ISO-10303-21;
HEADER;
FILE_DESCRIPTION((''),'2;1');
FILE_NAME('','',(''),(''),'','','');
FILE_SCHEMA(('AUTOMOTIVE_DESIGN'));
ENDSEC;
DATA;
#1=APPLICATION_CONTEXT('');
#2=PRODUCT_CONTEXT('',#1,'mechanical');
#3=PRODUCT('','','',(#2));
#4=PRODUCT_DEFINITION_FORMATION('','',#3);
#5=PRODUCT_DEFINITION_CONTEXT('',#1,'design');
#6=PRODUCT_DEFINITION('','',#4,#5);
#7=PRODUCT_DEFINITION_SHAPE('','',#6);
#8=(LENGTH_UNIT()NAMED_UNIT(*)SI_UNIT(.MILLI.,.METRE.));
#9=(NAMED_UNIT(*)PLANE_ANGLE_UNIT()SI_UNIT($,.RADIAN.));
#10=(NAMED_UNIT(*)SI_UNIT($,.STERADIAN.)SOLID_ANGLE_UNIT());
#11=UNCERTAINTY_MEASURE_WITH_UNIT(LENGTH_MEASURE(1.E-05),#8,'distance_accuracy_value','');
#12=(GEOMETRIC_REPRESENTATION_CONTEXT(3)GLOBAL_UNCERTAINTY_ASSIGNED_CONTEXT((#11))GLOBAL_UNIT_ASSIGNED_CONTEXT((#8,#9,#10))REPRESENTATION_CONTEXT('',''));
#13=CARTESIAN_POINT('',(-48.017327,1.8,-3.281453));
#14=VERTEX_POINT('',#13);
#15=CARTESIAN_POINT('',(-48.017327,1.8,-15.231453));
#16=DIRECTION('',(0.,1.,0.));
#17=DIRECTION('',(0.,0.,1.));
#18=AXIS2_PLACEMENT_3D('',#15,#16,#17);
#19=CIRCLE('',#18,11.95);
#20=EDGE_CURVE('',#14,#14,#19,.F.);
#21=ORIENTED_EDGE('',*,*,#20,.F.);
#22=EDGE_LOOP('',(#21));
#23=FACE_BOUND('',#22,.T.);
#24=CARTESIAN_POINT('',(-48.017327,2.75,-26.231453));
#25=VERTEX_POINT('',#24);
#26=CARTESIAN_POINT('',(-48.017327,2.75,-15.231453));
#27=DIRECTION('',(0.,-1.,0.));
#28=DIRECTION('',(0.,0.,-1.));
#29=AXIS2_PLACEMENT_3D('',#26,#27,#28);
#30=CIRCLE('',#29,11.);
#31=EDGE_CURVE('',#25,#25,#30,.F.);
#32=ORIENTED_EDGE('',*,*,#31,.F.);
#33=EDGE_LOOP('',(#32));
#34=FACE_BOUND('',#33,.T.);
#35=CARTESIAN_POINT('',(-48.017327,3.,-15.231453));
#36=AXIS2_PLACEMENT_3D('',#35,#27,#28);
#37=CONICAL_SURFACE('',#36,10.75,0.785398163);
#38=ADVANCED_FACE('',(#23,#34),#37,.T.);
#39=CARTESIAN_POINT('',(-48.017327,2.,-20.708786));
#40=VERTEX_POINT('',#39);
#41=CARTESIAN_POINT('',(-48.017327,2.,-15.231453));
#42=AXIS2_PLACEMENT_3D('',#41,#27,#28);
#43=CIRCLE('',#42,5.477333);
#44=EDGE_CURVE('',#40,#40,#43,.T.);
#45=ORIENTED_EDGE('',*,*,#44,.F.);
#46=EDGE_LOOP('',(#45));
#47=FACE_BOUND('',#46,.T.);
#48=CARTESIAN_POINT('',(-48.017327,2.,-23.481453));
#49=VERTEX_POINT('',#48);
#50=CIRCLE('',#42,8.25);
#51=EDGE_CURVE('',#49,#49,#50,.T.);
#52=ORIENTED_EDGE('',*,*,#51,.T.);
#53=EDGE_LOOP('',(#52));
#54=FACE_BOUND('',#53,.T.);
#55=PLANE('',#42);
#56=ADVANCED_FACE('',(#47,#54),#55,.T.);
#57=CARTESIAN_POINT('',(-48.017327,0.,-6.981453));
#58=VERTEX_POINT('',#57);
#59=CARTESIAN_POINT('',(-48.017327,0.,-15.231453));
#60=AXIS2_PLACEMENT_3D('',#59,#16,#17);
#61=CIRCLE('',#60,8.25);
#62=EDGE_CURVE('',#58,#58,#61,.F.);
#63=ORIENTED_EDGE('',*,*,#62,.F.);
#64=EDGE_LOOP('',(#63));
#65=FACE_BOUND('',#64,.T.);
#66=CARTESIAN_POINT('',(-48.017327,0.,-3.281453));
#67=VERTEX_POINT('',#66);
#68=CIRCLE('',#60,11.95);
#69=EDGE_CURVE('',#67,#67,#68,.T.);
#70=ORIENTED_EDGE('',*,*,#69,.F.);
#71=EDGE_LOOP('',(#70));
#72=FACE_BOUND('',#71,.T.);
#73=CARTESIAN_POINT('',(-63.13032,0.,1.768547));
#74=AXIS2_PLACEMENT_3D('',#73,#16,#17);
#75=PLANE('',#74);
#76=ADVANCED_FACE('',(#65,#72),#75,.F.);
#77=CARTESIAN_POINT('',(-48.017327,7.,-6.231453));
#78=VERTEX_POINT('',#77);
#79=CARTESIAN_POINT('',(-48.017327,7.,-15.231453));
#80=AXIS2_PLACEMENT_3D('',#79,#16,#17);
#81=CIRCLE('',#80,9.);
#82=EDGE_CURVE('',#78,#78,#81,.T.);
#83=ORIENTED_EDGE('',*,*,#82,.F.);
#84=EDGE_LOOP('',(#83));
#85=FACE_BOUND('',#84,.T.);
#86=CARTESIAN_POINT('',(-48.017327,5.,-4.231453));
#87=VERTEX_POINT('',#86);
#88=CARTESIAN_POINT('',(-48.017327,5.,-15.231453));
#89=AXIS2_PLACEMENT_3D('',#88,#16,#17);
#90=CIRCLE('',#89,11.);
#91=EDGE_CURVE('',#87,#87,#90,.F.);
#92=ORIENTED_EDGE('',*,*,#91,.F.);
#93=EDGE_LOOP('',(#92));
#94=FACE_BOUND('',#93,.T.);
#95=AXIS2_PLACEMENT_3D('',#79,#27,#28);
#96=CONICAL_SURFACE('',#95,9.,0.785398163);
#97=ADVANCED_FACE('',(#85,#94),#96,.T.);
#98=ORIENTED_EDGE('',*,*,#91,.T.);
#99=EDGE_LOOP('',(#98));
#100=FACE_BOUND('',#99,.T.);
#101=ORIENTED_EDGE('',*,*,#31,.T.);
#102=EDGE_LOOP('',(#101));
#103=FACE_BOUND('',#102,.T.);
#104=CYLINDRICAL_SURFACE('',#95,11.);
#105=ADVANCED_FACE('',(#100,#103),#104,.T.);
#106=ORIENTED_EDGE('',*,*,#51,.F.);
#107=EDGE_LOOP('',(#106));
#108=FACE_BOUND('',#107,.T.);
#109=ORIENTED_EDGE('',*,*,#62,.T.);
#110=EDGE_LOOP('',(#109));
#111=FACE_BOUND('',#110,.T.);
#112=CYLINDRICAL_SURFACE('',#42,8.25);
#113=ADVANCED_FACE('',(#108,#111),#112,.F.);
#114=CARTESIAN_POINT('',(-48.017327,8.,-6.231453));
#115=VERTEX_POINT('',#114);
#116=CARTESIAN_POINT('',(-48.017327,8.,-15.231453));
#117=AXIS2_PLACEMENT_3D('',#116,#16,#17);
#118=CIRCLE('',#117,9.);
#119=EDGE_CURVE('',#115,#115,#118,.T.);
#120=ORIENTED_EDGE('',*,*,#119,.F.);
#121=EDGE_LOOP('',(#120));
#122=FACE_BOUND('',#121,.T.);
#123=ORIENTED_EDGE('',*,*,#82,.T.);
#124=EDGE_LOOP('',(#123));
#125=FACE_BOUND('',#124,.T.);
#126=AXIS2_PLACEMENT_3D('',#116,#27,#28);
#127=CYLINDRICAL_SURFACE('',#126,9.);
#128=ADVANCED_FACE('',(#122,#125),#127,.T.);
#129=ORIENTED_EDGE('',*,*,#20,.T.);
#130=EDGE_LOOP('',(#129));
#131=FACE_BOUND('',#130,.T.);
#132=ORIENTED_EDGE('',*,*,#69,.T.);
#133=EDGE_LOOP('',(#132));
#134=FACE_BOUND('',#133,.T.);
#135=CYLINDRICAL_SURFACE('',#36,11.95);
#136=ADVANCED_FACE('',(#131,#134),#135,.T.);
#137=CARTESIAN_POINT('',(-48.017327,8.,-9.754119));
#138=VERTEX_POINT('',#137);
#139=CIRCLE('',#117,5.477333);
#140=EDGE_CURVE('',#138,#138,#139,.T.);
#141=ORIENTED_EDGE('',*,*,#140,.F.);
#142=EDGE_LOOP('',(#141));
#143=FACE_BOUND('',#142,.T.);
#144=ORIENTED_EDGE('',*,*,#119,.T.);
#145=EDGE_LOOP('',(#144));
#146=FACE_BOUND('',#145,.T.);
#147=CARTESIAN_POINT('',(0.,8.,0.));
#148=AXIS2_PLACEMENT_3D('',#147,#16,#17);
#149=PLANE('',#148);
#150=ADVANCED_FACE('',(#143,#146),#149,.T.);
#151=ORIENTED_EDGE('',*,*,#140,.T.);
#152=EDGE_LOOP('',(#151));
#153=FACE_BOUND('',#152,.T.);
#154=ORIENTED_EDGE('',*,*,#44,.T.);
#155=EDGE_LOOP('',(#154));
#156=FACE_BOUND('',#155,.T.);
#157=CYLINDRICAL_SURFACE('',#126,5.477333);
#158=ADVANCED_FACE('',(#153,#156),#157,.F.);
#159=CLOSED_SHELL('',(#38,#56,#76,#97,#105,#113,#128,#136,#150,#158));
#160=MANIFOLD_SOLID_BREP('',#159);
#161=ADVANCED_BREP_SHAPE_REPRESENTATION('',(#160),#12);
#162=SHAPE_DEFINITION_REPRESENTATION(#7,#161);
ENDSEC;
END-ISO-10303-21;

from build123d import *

# Parameters (mm, degrees)
SZKIC1_R                    = 9
SZKIC1_R_2                  = 5.477333333
DODANIE_WYCI_GNI_CIE1_DEPTH = 8
SZKIC1_3_R                  = 11
SZKIC1_3_R_2                = 9
DODANIE_WYCI_GNI_CIE2_DEPTH = 7
SZKIC1_4_R                  = 11.95
SZKIC1_4_R_2                = 11
DODANIE_WYCI_GNI_CIE3_DEPTH = 3
DODANIE_WYCI_GNI_CIE4_START = -3
SZKIC1_5_R                  = 11.95
SZKIC1_5_R_2                = 1.65
SZKIC1_5_R_3                = 11
SZKIC1_5_R_4                = 9
SZKIC1_5_R_5                = 5.477333333
DODANIE_WYCI_GNI_CIE4_DEPTH = 3
SZKIC2_R                    = 8.25
WYTNIJ_WYCI_GNI_CIE1_DEPTH  = 5
SFAZOWANIE1_SIZE            = 1.2
DODANIE_WYCI_GNI_CIE5_START = 17
SZKIC3_R                    = 1.65
DODANIE_WYCI_GNI_CIE5_DEPTH = 17
ZAOKR_GLENIE1_R             = 10
ZAOKR_GLENIE2_R             = 4
SFAZOWANIE2_SIZE            = 2
WYTNIJ_WYCI_GNI_CIE3_DEPTH  = 81.474279011


# Some blends are built 0.0001 mm under size
with BuildPart() as part:
    # Szkic1 → Dodanie-wyciągnięcie1 (new body)
    with BuildSketch(Plane(origin=(0, 0, 0), x_dir=(1, 0, 0), z_dir=(0, 1, 0))):
        with Locations(Location((-48.017326928, 15.231452718, 0), (0, 0, 270))):
            Circle(SZKIC1_R)
        with Locations(Location((-48.017326928, 15.231452718, 0), (0, 0, 270))):
            Circle(SZKIC1_R_2, mode=Mode.SUBTRACT)
    extrude(amount=DODANIE_WYCI_GNI_CIE1_DEPTH)

    # Szkic1<3> → Dodanie-wyciągnięcie2 (add)
    with BuildSketch(Plane(origin=(0, 0, 0), x_dir=(1, 0, 0), z_dir=(0, 1, 0))):
        with Locations(Location((-48.017326928, 15.231452718, 0), (0, 0, 270))):
            Circle(SZKIC1_3_R)
        with Locations(Location((-48.017326928, 15.231452718, 0), (0, 0, 270))):
            Circle(SZKIC1_3_R_2, mode=Mode.SUBTRACT)
    extrude(amount=DODANIE_WYCI_GNI_CIE2_DEPTH)

    # Szkic1<4> → Dodanie-wyciągnięcie3 (add)
    with BuildSketch(Plane(origin=(0, 0, 0), x_dir=(1, 0, 0), z_dir=(0, 1, 0))):
        with Locations(Location((-48.017326928, 15.231452718, 0), (0, 0, 270))):
            Circle(SZKIC1_4_R)
        with Locations(Location((-48.017326928, 15.231452718, 0), (0, 0, 270))):
            Circle(SZKIC1_4_R_2, mode=Mode.SUBTRACT)
    extrude(amount=DODANIE_WYCI_GNI_CIE3_DEPTH)

    # Szkic1<5> → Dodanie-wyciągnięcie4 (add)
    # profile 1 of 4: a face of its own
    with BuildSketch(Plane(origin=(0, 0, 0), x_dir=(1, 0, 0), z_dir=(0, 1, 0)).offset(DODANIE_WYCI_GNI_CIE4_START)):
        with BuildLine():
            Line((-69.017326928, 26.22592553), (-69.017326928, 4.236979905))
            ThreePointArc((-69.017326928, 4.236979905), (-67.978820752, -1.151729035), (-65.012060165, -5.768547282))
            Line((-65.012060165, -5.768547282), (-50.017326928, -5.768547282))
            Line((-50.017326928, -5.768547282), (-30.833560744, -5.768547282))
            Line((-30.833560744, -5.768547282), (-26.817326928, -1.752313466))
            Line((-26.817326928, -1.752313466), (-26.817326928, 32.215218902))
            Line((-26.817326928, 32.215218902), (-30.833560744, 36.231452718))
            Line((-30.833560744, 36.231452718), (-50.017326928, 36.231452718))
            Line((-50.017326928, 36.231452718), (-65.012060165, 36.231452718))
            ThreePointArc((-65.012060165, 36.231452718), (-67.978820752, 31.61463447), (-69.017326928, 26.22592553))
        make_face()
        with Locations(Location((-48.017326928, 15.231452718, 0), (0, 0, 270))):
            Circle(SZKIC1_5_R, mode=Mode.SUBTRACT)
        with Locations(Location((-63.517326928, -0.268547282, 0), (0, 0, 270))):
            Circle(SZKIC1_5_R_2, mode=Mode.SUBTRACT)
        with Locations(Location((-32.517326928, -0.268547282, 0), (0, 0, 270))):
            Circle(SZKIC1_5_R_2, mode=Mode.SUBTRACT)
        with Locations(Location((-32.517326928, 30.731452718, 0), (0, 0, 270))):
            Circle(SZKIC1_5_R_2, mode=Mode.SUBTRACT)
        with Locations(Location((-63.517326928, 30.731452718, 0), (0, 0, 270))):
            Circle(SZKIC1_5_R_2, mode=Mode.SUBTRACT)
    # profile 2 of 4: a face of its own
    with BuildSketch(Plane(origin=(0, 0, 0), x_dir=(1, 0, 0), z_dir=(0, 1, 0)).offset(DODANIE_WYCI_GNI_CIE4_START)):
        with Locations(Location((-48.017326928, 15.231452718, 0), (0, 0, 270))):
            Circle(SZKIC1_5_R)
        with Locations(Location((-48.017326928, 15.231452718, 0), (0, 0, 270))):
            Circle(SZKIC1_5_R_3, mode=Mode.SUBTRACT)
    # profile 3 of 4: a face of its own
    with BuildSketch(Plane(origin=(0, 0, 0), x_dir=(1, 0, 0), z_dir=(0, 1, 0)).offset(DODANIE_WYCI_GNI_CIE4_START)):
        with Locations(Location((-48.017326928, 15.231452718, 0), (0, 0, 270))):
            Circle(SZKIC1_5_R_3)
        with Locations(Location((-48.017326928, 15.231452718, 0), (0, 0, 270))):
            Circle(SZKIC1_5_R_4, mode=Mode.SUBTRACT)
    # profile 4 of 4: a face of its own
    with BuildSketch(Plane(origin=(0, 0, 0), x_dir=(1, 0, 0), z_dir=(0, 1, 0)).offset(DODANIE_WYCI_GNI_CIE4_START)):
        with Locations(Location((-48.017326928, 15.231452718, 0), (0, 0, 270))):
            Circle(SZKIC1_5_R_4)
        with Locations(Location((-48.017326928, 15.231452718, 0), (0, 0, 270))):
            Circle(SZKIC1_5_R_5, mode=Mode.SUBTRACT)
    extrude(amount=DODANIE_WYCI_GNI_CIE4_DEPTH)

    # Szkic2 → Wytnij-wyciągnięcie1 (cut)
    with BuildSketch(Plane.XZ.offset(3)):
        with Locations(Location((-48.017326928, -15.231452718, 0), (0, 0, 270))):
            Circle(SZKIC2_R)
    extrude(amount=-WYTNIJ_WYCI_GNI_CIE1_DEPTH, mode=Mode.SUBTRACT)

    # Sfazowanie1
    # the kernel refuses this chamfer: 1.2 mm, written as the material it takes off along each edge
    with BuildSketch(Plane(origin=(-48.017326928, 3, -15.231452718), x_dir=(0, 0, 1), z_dir=(-1, 0, 0))) as sfazowanie1_piece_1_section:
        Polygon((11.95 - SFAZOWANIE1_SIZE, 0), (11.95, -SFAZOWANIE1_SIZE), (11.95, 0), align=None)
    sfazowanie1_piece_1 = revolve(axis=Axis((-48.017326928, 3, -15.231452718), (0, 1, 0)), mode=Mode.PRIVATE)
    sfazowanie1_piece_1 = sfazowanie1_piece_1 - Plane(origin=(-48.017326928, 2.284838346, -15.231452718), x_dir=(0, 0, 1), z_dir=(0, -1, 0)) * Cylinder(11, 48, mode=Mode.PRIVATE)
    add(sfazowanie1_piece_1, mode=Mode.SUBTRACT)

    # Szkic3 → Dodanie-wyciągnięcie5 (add)
    with BuildSketch(Plane.XZ.offset(3).offset(DODANIE_WYCI_GNI_CIE5_START)):
        with BuildLine():
            Line((-69.017326928, -26.22592553), (-36.817326928, -26.22592553))
            Line((-36.817326928, -26.22592553), (-36.817326928, -4.236979905))
            Line((-36.817326928, -4.236979905), (-69.017326928, -4.236979905))
            ThreePointArc((-69.017326928, -4.236979905), (-67.978820752, 1.151729035), (-65.012060165, 5.768547282))
            Line((-65.012060165, 5.768547282), (-30.833560744, 5.768547282))
            Line((-30.833560744, 5.768547282), (-26.817326928, 1.752313466))
            Line((-26.817326928, 1.752313466), (-26.817326928, -32.215218902))
            Line((-26.817326928, -32.215218902), (-30.833560744, -36.231452718))
            Line((-30.833560744, -36.231452718), (-65.012060165, -36.231452718))
            ThreePointArc((-65.012060165, -36.231452718), (-67.978820752, -31.61463447), (-69.017326928, -26.22592553))
        make_face()
        with Locations(Location((-63.517326928, 0.268547282, 0), (0, 0, 90))):
            Circle(SZKIC3_R, mode=Mode.SUBTRACT)
        with Locations(Location((-32.517326928, 0.268547282, 0), (0, 0, 90))):
            Circle(SZKIC3_R, mode=Mode.SUBTRACT)
        with Locations(Location((-32.517326928, -30.731452718, 0), (0, 0, 90))):
            Circle(SZKIC3_R, mode=Mode.SUBTRACT)
        with Locations(Location((-63.517326928, -30.731452718, 0), (0, 0, 90))):
            Circle(SZKIC3_R, mode=Mode.SUBTRACT)
    extrude(amount=-DODANIE_WYCI_GNI_CIE5_DEPTH)

    # Zaokrąglenie1
    zaokr_glenie1_edges = [part.edges().sort_by_distance(p)[0] for p in [
        (-36.817326928, -11.5, -4.236979905),
        (-36.817326928, -11.5, -26.22592553),
    ]]
    fillet(zaokr_glenie1_edges, radius=ZAOKR_GLENIE1_R)

    # Zaokrąglenie2
    zaokr_glenie2_edges = [part.edges().sort_by_distance(p)[0] for p in [
        (-65.012060165, -10, -36.231452718),
        (-30.833560744, -10, -36.231452718),
        (-26.817326928, -10, -32.215218902),
        (-26.817326928, -10, 1.752313466),
        (-30.833560744, -10, 5.768547282),
        (-65.012060165, -10, 5.768547282),
        (-69.017326928, -11.5, -26.22592553),
        (-69.017326928, -11.5, -4.236979905),
    ]]
    fillet(zaokr_glenie2_edges, radius=ZAOKR_GLENIE2_R)

    # Sfazowanie2
    sfazowanie2_edges = [part.edges().sort_by_distance(p)[0] for p in [
        (-48.017326928, 7, -26.231452718),
    ]]
    chamfer(sfazowanie2_edges, length=SFAZOWANIE2_SIZE - 0.0001)  # a hair under: the kernel refuses the full size

    # Szkic5 → Wytnij-wyciągnięcie3 (cut, through all)
    with BuildSketch(Plane(origin=(0, 0, 0), x_dir=(1, 0, 0), z_dir=(0, 1, 0))):
        with BuildLine():
            Line((-63.130319625, -5.768547282), (-32.490414994, -5.768547282))
            ThreePointArc((-32.490414994, -5.768547282), (-30.959681264, -5.464065412), (-29.661987869, -4.596974407))
            Line((-29.661987869, -4.596974407), (-27.988899803, -2.923886342))
            ThreePointArc((-27.988899803, -2.923886342), (-27.121808798, -1.626192946), (-26.817326928, -0.095459217))
            Line((-26.817326928, -0.095459217), (-26.817326928, 30.558364652))
            ThreePointArc((-26.817326928, 30.558364652), (-27.121808798, 32.089098382), (-27.988899803, 33.386791777))
            Line((-27.988899803, 33.386791777), (-29.661987869, 35.059879842))
            ThreePointArc((-29.661987869, 35.059879842), (-30.959681264, 35.926970848), (-32.490414994, 36.231452718))
            Line((-32.490414994, 36.231452718), (-63.130319625, 36.231452718))
            ThreePointArc((-63.130319625, 36.231452718), (-64.980822324, 35.777667568), (-66.411459701, 34.519272599))
            ThreePointArc((-66.411459701, 34.519272599), (-68.350528387, 30.572480189), (-69.017326928, 26.22592553))
            Line((-69.017326928, 26.22592553), (-69.017326928, 4.236979905))
            ThreePointArc((-69.017326928, 4.236979905), (-68.350528387, -0.109574754), (-66.411459701, -4.056367163))
            ThreePointArc((-66.411459701, -4.056367163), (-64.980822324, -5.314762132), (-63.130319625, -5.768547282))
        make_face()
    extrude(amount=-WYTNIJ_WYCI_GNI_CIE3_DEPTH, mode=Mode.SUBTRACT)


solid = part.part
